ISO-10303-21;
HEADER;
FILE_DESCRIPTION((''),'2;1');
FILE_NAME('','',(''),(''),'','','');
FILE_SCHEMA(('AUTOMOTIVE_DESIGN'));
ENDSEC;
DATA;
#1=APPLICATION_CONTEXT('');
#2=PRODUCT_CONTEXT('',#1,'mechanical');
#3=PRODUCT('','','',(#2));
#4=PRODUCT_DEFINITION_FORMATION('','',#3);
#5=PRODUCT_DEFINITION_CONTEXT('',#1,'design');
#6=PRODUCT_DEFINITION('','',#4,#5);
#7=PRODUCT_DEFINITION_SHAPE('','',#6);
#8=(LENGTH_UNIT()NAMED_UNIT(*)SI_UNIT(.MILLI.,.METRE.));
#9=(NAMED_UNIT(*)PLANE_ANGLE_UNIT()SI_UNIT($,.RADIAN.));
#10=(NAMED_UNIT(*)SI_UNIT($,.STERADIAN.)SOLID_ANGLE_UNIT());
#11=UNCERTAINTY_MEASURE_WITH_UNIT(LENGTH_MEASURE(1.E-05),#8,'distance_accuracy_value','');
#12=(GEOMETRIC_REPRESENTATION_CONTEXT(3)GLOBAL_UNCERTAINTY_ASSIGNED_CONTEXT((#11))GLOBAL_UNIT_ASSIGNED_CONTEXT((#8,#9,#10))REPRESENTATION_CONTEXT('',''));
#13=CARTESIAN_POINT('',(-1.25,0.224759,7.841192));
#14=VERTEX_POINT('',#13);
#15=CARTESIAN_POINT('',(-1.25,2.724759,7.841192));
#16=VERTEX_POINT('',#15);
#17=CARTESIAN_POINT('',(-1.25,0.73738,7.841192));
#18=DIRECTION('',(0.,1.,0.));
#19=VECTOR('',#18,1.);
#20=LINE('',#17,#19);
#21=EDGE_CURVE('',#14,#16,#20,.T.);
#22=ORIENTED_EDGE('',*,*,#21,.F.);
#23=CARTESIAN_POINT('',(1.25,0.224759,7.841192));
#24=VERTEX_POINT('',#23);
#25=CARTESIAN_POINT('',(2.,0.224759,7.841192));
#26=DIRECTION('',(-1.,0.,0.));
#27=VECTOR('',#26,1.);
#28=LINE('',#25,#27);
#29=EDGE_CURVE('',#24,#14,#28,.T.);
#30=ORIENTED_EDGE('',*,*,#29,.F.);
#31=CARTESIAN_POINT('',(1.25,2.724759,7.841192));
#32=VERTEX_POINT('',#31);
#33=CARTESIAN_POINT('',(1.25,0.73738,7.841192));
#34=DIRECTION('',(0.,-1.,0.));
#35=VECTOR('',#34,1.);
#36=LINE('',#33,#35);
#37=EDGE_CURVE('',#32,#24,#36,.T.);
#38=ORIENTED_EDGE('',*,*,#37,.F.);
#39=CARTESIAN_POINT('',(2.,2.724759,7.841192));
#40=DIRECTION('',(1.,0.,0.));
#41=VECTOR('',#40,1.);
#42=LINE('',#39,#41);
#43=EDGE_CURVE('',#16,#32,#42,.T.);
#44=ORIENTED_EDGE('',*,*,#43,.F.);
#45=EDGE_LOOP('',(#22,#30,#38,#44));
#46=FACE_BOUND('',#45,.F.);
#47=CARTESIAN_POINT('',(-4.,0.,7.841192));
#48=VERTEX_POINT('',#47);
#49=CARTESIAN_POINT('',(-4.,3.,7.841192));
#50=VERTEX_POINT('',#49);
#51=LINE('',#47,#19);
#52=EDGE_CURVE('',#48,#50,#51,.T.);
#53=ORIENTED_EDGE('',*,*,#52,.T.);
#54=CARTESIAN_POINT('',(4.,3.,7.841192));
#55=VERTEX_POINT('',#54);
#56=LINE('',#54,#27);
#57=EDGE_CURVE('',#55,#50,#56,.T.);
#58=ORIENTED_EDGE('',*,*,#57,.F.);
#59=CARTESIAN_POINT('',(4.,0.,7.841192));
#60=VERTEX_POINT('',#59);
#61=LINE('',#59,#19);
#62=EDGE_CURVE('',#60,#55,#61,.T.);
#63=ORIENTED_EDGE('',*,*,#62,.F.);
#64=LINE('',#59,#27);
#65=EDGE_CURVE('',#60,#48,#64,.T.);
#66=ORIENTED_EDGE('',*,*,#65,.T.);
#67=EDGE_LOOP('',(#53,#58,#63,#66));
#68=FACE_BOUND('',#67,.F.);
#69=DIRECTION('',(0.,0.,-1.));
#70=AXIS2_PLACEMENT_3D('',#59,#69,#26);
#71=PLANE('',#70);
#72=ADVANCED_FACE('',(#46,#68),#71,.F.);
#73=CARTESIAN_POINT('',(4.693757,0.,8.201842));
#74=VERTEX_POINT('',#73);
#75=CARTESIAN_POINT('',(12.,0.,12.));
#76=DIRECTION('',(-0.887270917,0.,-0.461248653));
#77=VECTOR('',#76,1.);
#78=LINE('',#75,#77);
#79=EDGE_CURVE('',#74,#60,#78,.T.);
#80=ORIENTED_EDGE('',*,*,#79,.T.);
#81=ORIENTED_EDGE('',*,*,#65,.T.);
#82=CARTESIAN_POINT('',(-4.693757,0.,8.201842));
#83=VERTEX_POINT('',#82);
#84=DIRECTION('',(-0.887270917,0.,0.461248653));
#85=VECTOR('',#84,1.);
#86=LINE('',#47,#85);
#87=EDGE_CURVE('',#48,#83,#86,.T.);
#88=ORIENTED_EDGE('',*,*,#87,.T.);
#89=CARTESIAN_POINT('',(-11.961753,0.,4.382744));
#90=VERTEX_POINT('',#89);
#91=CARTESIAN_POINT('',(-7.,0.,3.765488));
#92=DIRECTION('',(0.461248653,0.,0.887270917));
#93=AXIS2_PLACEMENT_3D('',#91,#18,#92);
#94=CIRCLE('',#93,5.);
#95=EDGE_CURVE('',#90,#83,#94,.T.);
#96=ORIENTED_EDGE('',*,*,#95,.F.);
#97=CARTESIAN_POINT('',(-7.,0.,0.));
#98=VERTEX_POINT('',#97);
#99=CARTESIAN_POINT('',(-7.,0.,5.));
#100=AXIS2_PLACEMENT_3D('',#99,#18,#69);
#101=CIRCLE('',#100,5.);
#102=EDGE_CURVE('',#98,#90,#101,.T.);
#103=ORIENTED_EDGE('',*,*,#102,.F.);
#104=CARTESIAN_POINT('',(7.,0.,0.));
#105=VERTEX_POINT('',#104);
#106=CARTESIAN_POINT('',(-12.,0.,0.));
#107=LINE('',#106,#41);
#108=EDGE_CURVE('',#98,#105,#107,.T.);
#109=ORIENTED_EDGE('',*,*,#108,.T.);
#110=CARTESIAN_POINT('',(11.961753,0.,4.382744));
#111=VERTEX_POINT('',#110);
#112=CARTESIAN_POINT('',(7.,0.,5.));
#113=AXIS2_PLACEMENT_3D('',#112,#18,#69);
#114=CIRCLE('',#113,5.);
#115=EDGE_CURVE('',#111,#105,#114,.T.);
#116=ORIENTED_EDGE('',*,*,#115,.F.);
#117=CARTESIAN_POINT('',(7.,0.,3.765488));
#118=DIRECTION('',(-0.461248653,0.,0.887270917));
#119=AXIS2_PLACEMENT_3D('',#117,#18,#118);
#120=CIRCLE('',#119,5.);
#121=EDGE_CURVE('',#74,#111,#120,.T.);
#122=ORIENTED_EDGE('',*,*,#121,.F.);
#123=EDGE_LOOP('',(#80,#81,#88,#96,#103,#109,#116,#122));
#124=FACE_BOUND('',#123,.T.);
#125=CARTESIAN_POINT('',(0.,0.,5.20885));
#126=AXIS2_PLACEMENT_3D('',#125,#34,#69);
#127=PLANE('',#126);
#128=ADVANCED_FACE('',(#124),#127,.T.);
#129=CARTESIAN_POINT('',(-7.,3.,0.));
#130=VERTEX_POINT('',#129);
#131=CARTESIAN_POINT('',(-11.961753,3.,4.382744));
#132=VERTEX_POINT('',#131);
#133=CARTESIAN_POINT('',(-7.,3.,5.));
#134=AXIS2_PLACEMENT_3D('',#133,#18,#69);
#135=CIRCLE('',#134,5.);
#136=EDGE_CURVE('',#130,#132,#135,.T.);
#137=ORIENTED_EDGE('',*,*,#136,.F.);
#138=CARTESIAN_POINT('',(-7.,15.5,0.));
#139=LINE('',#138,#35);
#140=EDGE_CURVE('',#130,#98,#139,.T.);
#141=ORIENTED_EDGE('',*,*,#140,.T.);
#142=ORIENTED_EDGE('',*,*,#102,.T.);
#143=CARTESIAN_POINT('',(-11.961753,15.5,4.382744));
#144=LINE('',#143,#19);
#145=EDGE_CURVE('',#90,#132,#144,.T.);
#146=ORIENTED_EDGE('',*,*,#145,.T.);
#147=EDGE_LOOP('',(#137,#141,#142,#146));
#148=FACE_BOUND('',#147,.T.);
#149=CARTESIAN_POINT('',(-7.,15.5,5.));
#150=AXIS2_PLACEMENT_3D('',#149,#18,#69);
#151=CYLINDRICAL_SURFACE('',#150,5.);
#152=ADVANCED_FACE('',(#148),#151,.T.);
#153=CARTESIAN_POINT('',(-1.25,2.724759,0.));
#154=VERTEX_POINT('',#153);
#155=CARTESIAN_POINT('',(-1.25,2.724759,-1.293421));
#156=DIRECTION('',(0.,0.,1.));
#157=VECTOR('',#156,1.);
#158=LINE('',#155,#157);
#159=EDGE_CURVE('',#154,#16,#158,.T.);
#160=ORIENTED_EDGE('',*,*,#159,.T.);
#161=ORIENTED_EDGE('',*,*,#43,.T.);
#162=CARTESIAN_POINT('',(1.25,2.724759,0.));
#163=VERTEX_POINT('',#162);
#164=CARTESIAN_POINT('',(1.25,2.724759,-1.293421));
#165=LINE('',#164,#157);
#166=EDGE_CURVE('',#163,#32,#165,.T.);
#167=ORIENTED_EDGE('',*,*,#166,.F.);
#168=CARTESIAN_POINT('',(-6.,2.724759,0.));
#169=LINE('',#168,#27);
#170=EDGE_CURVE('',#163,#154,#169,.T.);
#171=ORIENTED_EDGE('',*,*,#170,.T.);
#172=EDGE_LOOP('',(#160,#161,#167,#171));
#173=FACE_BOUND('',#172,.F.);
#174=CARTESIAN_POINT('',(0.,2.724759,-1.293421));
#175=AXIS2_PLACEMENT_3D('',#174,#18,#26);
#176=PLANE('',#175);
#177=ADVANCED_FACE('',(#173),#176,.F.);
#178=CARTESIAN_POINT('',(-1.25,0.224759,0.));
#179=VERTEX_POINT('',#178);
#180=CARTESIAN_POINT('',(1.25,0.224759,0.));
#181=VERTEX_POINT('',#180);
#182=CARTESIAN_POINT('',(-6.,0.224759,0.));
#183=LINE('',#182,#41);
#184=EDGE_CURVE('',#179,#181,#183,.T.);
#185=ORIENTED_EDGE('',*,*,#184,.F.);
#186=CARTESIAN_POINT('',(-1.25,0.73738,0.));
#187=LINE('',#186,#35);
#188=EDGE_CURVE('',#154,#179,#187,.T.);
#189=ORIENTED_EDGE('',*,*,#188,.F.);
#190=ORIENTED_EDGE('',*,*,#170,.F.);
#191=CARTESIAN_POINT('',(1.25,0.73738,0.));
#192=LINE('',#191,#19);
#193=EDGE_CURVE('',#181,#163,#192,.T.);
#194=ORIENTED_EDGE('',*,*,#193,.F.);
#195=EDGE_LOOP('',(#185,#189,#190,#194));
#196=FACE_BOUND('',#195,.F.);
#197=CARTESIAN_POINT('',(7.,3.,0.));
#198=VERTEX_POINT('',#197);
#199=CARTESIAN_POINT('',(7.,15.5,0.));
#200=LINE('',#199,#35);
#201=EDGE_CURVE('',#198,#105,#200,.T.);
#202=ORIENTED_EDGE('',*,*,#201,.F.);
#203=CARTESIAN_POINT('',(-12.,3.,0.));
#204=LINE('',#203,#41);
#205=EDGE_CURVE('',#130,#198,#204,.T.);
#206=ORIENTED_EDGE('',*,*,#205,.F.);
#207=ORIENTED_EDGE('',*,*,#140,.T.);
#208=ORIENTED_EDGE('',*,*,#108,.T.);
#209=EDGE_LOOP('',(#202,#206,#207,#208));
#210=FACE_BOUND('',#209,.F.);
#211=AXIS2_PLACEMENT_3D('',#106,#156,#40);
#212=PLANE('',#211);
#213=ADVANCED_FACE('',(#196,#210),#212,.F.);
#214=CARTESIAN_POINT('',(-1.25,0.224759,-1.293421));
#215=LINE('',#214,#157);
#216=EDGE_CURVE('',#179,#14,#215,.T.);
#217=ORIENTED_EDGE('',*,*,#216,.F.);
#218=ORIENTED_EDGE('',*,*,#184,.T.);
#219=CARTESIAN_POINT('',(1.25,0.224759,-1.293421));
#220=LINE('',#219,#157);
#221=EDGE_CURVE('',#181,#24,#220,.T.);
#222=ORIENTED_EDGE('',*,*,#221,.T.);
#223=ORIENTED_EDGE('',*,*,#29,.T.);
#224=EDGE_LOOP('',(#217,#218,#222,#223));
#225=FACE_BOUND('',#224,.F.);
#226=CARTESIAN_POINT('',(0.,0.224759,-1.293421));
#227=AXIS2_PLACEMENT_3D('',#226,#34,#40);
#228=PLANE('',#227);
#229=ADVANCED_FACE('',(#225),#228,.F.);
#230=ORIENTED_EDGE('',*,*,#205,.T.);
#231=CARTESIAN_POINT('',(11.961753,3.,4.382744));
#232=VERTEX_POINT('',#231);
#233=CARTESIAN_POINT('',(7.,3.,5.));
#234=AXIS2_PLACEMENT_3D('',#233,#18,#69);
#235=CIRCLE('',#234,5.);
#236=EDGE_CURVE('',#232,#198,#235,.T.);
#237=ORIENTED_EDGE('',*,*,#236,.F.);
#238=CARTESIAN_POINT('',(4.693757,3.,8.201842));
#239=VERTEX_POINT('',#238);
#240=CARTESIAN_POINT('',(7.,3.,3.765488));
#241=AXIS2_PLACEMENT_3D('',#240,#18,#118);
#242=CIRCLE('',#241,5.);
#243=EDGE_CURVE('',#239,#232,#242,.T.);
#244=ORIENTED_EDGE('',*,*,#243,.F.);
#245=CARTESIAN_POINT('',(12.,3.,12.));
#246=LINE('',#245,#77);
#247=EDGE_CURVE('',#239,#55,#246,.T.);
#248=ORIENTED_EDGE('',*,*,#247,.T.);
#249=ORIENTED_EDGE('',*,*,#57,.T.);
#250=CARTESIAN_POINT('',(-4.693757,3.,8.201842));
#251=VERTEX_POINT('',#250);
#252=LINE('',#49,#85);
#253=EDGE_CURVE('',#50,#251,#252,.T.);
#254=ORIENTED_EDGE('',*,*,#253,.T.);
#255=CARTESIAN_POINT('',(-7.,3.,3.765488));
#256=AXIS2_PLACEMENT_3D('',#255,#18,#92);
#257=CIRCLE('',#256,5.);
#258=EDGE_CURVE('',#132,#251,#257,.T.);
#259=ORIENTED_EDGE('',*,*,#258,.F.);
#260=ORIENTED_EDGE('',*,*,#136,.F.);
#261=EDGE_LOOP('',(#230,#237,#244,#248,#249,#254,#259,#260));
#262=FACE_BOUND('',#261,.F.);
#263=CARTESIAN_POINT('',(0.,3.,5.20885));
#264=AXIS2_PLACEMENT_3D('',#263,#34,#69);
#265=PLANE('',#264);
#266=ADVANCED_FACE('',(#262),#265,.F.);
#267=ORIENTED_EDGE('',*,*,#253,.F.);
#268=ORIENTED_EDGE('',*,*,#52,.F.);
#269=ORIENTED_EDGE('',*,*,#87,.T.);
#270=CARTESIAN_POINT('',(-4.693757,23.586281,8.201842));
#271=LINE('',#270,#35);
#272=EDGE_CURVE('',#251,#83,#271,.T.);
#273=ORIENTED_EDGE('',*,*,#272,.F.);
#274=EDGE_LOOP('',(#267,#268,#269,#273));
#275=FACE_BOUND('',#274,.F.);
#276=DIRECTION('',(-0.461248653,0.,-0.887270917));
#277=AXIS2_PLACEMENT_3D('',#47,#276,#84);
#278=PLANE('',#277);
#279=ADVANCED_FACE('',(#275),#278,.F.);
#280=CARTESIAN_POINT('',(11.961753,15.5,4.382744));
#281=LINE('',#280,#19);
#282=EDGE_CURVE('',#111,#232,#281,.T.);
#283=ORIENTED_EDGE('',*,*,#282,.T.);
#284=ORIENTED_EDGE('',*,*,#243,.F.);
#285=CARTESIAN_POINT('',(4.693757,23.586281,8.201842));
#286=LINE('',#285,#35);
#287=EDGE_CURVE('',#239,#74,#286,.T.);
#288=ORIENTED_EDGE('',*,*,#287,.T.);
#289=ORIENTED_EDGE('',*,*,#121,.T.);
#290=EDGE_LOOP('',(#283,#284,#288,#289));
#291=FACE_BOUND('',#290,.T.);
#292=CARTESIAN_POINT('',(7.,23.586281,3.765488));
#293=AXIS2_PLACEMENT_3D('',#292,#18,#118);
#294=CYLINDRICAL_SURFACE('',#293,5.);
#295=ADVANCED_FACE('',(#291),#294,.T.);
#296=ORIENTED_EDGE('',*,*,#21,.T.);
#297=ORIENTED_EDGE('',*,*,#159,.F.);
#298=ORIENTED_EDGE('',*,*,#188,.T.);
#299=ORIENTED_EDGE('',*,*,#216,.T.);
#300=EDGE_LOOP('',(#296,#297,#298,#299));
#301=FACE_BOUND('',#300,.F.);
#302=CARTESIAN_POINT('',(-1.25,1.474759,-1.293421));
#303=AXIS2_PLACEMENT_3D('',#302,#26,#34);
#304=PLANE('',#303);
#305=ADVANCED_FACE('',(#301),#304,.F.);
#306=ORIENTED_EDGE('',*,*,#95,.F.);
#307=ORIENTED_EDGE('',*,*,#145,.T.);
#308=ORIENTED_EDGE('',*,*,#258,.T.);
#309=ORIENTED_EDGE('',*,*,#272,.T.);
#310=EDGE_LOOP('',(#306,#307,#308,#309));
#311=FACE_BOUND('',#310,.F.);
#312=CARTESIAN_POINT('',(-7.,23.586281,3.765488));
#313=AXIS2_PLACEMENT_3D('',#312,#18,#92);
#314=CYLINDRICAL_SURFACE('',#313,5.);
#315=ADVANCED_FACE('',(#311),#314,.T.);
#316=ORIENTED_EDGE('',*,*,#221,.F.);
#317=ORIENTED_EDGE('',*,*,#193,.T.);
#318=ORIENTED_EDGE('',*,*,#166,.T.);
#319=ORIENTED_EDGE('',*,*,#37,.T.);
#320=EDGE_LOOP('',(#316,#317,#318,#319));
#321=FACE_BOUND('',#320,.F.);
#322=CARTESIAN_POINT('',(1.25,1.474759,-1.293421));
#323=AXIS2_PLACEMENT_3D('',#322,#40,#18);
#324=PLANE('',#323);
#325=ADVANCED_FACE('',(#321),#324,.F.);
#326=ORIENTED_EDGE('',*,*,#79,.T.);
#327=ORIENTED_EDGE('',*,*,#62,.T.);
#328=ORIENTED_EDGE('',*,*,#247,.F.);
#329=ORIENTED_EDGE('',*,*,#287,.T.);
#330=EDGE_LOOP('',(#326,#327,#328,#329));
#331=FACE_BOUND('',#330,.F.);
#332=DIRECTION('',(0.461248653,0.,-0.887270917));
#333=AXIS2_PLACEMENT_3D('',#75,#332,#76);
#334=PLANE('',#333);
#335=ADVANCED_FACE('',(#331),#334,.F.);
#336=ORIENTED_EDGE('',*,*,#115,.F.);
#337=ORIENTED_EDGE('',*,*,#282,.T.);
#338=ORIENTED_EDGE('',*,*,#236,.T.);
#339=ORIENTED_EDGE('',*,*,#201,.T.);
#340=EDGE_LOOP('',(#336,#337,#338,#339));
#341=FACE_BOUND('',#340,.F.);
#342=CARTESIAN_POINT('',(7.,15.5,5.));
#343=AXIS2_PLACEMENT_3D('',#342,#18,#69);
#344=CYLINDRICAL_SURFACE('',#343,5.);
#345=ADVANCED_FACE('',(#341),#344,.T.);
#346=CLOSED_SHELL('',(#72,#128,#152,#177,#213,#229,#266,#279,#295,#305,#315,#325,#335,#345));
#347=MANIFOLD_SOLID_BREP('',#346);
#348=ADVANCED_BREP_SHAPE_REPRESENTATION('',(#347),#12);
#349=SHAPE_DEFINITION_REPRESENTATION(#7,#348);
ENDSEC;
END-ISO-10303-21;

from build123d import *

# Parameters (mm, degrees)
F3_T1_DEPTH = 28
F3_T3_DEPTH = 44.1725614133
F5_W        = 2.5
F5_H        = 2.5


# Not quite as in the source:
# - a fillet or chamfer that OpenCascade refuses, or shapes differently, is made with other operations: its cross-section is extruded or revolved along the edge and cut away or added
# - two fillets or chamfers of one size are made in one step


with BuildPart() as f2:
    # F2: sweep along a path in F1
    with BuildLine(Plane.XY) as f2_path:
        Line((0, 0), (0, 3))
    # F0 (on Front) → F2 (sweep)
    with BuildSketch(Plane.XZ):
        Polygon((-12, 0), (0, 0), (12, 0), (12, 12), (4, 7.8411921859), (0, 7.8411921859), (-4, 7.8411921859), (-12, 12), align=None)
    sweep(path=f2_path.line)

    # F3: fillet of radius 5 on 4 edges, made by hand

    # F3_s2 → F3_t1 (cut)
    with BuildSketch(Plane.XZ.offset(-15.5)):
        with BuildLine():
            ThreePointArc((-7, 0), (-10.5355339059, 1.4644660941), (-12, 5))
            Line((-12, 5), (-12, 0))
            Line((-12, 0), (-7, 0))
        make_face()
        with BuildLine():
            ThreePointArc((7, 0), (10.5355339059, 1.4644660941), (12, 5))
            Line((12, 5), (12, 0))
            Line((12, 0), (7, 0))
        make_face()
    extrude(amount=F3_T1_DEPTH, mode=Mode.SUBTRACT)

    # F3_s4 → F3_t3 (cut)
    with BuildSketch(Plane.XZ.offset(-23.5862807066)):
        with BuildLine():
            ThreePointArc((-4.6937567356, 8.2018423025), (-9.5950706809, 8.0393159966), (-12, 3.7654877173))
            Line((-12, 3.7654877173), (-12, 12))
            Line((-12, 12), (-4.6937567356, 8.2018423025))
        make_face()
        with BuildLine():
            ThreePointArc((4.6937567356, 8.2018423025), (9.5950706809, 8.0393159966), (12, 3.7654877173))
            Line((12, 3.7654877173), (12, 12))
            Line((12, 12), (4.6937567356, 8.2018423025))
        make_face()
    extrude(amount=F3_T3_DEPTH, mode=Mode.SUBTRACT)

    # F7: sweep along a path in F6
    with BuildLine(Plane.XZ) as f7_path:
        Line((0, -1.2934210245), (0, 11.7065789755))
    # F5 (on Top) → F7 (sweep, cut)
    with BuildSketch(Plane.XY):
        with Locations((0, 1.4747590758)):
            Rectangle(F5_W, F5_H)
    sweep(path=f7_path.line, mode=Mode.SUBTRACT)


solid = f2.part
